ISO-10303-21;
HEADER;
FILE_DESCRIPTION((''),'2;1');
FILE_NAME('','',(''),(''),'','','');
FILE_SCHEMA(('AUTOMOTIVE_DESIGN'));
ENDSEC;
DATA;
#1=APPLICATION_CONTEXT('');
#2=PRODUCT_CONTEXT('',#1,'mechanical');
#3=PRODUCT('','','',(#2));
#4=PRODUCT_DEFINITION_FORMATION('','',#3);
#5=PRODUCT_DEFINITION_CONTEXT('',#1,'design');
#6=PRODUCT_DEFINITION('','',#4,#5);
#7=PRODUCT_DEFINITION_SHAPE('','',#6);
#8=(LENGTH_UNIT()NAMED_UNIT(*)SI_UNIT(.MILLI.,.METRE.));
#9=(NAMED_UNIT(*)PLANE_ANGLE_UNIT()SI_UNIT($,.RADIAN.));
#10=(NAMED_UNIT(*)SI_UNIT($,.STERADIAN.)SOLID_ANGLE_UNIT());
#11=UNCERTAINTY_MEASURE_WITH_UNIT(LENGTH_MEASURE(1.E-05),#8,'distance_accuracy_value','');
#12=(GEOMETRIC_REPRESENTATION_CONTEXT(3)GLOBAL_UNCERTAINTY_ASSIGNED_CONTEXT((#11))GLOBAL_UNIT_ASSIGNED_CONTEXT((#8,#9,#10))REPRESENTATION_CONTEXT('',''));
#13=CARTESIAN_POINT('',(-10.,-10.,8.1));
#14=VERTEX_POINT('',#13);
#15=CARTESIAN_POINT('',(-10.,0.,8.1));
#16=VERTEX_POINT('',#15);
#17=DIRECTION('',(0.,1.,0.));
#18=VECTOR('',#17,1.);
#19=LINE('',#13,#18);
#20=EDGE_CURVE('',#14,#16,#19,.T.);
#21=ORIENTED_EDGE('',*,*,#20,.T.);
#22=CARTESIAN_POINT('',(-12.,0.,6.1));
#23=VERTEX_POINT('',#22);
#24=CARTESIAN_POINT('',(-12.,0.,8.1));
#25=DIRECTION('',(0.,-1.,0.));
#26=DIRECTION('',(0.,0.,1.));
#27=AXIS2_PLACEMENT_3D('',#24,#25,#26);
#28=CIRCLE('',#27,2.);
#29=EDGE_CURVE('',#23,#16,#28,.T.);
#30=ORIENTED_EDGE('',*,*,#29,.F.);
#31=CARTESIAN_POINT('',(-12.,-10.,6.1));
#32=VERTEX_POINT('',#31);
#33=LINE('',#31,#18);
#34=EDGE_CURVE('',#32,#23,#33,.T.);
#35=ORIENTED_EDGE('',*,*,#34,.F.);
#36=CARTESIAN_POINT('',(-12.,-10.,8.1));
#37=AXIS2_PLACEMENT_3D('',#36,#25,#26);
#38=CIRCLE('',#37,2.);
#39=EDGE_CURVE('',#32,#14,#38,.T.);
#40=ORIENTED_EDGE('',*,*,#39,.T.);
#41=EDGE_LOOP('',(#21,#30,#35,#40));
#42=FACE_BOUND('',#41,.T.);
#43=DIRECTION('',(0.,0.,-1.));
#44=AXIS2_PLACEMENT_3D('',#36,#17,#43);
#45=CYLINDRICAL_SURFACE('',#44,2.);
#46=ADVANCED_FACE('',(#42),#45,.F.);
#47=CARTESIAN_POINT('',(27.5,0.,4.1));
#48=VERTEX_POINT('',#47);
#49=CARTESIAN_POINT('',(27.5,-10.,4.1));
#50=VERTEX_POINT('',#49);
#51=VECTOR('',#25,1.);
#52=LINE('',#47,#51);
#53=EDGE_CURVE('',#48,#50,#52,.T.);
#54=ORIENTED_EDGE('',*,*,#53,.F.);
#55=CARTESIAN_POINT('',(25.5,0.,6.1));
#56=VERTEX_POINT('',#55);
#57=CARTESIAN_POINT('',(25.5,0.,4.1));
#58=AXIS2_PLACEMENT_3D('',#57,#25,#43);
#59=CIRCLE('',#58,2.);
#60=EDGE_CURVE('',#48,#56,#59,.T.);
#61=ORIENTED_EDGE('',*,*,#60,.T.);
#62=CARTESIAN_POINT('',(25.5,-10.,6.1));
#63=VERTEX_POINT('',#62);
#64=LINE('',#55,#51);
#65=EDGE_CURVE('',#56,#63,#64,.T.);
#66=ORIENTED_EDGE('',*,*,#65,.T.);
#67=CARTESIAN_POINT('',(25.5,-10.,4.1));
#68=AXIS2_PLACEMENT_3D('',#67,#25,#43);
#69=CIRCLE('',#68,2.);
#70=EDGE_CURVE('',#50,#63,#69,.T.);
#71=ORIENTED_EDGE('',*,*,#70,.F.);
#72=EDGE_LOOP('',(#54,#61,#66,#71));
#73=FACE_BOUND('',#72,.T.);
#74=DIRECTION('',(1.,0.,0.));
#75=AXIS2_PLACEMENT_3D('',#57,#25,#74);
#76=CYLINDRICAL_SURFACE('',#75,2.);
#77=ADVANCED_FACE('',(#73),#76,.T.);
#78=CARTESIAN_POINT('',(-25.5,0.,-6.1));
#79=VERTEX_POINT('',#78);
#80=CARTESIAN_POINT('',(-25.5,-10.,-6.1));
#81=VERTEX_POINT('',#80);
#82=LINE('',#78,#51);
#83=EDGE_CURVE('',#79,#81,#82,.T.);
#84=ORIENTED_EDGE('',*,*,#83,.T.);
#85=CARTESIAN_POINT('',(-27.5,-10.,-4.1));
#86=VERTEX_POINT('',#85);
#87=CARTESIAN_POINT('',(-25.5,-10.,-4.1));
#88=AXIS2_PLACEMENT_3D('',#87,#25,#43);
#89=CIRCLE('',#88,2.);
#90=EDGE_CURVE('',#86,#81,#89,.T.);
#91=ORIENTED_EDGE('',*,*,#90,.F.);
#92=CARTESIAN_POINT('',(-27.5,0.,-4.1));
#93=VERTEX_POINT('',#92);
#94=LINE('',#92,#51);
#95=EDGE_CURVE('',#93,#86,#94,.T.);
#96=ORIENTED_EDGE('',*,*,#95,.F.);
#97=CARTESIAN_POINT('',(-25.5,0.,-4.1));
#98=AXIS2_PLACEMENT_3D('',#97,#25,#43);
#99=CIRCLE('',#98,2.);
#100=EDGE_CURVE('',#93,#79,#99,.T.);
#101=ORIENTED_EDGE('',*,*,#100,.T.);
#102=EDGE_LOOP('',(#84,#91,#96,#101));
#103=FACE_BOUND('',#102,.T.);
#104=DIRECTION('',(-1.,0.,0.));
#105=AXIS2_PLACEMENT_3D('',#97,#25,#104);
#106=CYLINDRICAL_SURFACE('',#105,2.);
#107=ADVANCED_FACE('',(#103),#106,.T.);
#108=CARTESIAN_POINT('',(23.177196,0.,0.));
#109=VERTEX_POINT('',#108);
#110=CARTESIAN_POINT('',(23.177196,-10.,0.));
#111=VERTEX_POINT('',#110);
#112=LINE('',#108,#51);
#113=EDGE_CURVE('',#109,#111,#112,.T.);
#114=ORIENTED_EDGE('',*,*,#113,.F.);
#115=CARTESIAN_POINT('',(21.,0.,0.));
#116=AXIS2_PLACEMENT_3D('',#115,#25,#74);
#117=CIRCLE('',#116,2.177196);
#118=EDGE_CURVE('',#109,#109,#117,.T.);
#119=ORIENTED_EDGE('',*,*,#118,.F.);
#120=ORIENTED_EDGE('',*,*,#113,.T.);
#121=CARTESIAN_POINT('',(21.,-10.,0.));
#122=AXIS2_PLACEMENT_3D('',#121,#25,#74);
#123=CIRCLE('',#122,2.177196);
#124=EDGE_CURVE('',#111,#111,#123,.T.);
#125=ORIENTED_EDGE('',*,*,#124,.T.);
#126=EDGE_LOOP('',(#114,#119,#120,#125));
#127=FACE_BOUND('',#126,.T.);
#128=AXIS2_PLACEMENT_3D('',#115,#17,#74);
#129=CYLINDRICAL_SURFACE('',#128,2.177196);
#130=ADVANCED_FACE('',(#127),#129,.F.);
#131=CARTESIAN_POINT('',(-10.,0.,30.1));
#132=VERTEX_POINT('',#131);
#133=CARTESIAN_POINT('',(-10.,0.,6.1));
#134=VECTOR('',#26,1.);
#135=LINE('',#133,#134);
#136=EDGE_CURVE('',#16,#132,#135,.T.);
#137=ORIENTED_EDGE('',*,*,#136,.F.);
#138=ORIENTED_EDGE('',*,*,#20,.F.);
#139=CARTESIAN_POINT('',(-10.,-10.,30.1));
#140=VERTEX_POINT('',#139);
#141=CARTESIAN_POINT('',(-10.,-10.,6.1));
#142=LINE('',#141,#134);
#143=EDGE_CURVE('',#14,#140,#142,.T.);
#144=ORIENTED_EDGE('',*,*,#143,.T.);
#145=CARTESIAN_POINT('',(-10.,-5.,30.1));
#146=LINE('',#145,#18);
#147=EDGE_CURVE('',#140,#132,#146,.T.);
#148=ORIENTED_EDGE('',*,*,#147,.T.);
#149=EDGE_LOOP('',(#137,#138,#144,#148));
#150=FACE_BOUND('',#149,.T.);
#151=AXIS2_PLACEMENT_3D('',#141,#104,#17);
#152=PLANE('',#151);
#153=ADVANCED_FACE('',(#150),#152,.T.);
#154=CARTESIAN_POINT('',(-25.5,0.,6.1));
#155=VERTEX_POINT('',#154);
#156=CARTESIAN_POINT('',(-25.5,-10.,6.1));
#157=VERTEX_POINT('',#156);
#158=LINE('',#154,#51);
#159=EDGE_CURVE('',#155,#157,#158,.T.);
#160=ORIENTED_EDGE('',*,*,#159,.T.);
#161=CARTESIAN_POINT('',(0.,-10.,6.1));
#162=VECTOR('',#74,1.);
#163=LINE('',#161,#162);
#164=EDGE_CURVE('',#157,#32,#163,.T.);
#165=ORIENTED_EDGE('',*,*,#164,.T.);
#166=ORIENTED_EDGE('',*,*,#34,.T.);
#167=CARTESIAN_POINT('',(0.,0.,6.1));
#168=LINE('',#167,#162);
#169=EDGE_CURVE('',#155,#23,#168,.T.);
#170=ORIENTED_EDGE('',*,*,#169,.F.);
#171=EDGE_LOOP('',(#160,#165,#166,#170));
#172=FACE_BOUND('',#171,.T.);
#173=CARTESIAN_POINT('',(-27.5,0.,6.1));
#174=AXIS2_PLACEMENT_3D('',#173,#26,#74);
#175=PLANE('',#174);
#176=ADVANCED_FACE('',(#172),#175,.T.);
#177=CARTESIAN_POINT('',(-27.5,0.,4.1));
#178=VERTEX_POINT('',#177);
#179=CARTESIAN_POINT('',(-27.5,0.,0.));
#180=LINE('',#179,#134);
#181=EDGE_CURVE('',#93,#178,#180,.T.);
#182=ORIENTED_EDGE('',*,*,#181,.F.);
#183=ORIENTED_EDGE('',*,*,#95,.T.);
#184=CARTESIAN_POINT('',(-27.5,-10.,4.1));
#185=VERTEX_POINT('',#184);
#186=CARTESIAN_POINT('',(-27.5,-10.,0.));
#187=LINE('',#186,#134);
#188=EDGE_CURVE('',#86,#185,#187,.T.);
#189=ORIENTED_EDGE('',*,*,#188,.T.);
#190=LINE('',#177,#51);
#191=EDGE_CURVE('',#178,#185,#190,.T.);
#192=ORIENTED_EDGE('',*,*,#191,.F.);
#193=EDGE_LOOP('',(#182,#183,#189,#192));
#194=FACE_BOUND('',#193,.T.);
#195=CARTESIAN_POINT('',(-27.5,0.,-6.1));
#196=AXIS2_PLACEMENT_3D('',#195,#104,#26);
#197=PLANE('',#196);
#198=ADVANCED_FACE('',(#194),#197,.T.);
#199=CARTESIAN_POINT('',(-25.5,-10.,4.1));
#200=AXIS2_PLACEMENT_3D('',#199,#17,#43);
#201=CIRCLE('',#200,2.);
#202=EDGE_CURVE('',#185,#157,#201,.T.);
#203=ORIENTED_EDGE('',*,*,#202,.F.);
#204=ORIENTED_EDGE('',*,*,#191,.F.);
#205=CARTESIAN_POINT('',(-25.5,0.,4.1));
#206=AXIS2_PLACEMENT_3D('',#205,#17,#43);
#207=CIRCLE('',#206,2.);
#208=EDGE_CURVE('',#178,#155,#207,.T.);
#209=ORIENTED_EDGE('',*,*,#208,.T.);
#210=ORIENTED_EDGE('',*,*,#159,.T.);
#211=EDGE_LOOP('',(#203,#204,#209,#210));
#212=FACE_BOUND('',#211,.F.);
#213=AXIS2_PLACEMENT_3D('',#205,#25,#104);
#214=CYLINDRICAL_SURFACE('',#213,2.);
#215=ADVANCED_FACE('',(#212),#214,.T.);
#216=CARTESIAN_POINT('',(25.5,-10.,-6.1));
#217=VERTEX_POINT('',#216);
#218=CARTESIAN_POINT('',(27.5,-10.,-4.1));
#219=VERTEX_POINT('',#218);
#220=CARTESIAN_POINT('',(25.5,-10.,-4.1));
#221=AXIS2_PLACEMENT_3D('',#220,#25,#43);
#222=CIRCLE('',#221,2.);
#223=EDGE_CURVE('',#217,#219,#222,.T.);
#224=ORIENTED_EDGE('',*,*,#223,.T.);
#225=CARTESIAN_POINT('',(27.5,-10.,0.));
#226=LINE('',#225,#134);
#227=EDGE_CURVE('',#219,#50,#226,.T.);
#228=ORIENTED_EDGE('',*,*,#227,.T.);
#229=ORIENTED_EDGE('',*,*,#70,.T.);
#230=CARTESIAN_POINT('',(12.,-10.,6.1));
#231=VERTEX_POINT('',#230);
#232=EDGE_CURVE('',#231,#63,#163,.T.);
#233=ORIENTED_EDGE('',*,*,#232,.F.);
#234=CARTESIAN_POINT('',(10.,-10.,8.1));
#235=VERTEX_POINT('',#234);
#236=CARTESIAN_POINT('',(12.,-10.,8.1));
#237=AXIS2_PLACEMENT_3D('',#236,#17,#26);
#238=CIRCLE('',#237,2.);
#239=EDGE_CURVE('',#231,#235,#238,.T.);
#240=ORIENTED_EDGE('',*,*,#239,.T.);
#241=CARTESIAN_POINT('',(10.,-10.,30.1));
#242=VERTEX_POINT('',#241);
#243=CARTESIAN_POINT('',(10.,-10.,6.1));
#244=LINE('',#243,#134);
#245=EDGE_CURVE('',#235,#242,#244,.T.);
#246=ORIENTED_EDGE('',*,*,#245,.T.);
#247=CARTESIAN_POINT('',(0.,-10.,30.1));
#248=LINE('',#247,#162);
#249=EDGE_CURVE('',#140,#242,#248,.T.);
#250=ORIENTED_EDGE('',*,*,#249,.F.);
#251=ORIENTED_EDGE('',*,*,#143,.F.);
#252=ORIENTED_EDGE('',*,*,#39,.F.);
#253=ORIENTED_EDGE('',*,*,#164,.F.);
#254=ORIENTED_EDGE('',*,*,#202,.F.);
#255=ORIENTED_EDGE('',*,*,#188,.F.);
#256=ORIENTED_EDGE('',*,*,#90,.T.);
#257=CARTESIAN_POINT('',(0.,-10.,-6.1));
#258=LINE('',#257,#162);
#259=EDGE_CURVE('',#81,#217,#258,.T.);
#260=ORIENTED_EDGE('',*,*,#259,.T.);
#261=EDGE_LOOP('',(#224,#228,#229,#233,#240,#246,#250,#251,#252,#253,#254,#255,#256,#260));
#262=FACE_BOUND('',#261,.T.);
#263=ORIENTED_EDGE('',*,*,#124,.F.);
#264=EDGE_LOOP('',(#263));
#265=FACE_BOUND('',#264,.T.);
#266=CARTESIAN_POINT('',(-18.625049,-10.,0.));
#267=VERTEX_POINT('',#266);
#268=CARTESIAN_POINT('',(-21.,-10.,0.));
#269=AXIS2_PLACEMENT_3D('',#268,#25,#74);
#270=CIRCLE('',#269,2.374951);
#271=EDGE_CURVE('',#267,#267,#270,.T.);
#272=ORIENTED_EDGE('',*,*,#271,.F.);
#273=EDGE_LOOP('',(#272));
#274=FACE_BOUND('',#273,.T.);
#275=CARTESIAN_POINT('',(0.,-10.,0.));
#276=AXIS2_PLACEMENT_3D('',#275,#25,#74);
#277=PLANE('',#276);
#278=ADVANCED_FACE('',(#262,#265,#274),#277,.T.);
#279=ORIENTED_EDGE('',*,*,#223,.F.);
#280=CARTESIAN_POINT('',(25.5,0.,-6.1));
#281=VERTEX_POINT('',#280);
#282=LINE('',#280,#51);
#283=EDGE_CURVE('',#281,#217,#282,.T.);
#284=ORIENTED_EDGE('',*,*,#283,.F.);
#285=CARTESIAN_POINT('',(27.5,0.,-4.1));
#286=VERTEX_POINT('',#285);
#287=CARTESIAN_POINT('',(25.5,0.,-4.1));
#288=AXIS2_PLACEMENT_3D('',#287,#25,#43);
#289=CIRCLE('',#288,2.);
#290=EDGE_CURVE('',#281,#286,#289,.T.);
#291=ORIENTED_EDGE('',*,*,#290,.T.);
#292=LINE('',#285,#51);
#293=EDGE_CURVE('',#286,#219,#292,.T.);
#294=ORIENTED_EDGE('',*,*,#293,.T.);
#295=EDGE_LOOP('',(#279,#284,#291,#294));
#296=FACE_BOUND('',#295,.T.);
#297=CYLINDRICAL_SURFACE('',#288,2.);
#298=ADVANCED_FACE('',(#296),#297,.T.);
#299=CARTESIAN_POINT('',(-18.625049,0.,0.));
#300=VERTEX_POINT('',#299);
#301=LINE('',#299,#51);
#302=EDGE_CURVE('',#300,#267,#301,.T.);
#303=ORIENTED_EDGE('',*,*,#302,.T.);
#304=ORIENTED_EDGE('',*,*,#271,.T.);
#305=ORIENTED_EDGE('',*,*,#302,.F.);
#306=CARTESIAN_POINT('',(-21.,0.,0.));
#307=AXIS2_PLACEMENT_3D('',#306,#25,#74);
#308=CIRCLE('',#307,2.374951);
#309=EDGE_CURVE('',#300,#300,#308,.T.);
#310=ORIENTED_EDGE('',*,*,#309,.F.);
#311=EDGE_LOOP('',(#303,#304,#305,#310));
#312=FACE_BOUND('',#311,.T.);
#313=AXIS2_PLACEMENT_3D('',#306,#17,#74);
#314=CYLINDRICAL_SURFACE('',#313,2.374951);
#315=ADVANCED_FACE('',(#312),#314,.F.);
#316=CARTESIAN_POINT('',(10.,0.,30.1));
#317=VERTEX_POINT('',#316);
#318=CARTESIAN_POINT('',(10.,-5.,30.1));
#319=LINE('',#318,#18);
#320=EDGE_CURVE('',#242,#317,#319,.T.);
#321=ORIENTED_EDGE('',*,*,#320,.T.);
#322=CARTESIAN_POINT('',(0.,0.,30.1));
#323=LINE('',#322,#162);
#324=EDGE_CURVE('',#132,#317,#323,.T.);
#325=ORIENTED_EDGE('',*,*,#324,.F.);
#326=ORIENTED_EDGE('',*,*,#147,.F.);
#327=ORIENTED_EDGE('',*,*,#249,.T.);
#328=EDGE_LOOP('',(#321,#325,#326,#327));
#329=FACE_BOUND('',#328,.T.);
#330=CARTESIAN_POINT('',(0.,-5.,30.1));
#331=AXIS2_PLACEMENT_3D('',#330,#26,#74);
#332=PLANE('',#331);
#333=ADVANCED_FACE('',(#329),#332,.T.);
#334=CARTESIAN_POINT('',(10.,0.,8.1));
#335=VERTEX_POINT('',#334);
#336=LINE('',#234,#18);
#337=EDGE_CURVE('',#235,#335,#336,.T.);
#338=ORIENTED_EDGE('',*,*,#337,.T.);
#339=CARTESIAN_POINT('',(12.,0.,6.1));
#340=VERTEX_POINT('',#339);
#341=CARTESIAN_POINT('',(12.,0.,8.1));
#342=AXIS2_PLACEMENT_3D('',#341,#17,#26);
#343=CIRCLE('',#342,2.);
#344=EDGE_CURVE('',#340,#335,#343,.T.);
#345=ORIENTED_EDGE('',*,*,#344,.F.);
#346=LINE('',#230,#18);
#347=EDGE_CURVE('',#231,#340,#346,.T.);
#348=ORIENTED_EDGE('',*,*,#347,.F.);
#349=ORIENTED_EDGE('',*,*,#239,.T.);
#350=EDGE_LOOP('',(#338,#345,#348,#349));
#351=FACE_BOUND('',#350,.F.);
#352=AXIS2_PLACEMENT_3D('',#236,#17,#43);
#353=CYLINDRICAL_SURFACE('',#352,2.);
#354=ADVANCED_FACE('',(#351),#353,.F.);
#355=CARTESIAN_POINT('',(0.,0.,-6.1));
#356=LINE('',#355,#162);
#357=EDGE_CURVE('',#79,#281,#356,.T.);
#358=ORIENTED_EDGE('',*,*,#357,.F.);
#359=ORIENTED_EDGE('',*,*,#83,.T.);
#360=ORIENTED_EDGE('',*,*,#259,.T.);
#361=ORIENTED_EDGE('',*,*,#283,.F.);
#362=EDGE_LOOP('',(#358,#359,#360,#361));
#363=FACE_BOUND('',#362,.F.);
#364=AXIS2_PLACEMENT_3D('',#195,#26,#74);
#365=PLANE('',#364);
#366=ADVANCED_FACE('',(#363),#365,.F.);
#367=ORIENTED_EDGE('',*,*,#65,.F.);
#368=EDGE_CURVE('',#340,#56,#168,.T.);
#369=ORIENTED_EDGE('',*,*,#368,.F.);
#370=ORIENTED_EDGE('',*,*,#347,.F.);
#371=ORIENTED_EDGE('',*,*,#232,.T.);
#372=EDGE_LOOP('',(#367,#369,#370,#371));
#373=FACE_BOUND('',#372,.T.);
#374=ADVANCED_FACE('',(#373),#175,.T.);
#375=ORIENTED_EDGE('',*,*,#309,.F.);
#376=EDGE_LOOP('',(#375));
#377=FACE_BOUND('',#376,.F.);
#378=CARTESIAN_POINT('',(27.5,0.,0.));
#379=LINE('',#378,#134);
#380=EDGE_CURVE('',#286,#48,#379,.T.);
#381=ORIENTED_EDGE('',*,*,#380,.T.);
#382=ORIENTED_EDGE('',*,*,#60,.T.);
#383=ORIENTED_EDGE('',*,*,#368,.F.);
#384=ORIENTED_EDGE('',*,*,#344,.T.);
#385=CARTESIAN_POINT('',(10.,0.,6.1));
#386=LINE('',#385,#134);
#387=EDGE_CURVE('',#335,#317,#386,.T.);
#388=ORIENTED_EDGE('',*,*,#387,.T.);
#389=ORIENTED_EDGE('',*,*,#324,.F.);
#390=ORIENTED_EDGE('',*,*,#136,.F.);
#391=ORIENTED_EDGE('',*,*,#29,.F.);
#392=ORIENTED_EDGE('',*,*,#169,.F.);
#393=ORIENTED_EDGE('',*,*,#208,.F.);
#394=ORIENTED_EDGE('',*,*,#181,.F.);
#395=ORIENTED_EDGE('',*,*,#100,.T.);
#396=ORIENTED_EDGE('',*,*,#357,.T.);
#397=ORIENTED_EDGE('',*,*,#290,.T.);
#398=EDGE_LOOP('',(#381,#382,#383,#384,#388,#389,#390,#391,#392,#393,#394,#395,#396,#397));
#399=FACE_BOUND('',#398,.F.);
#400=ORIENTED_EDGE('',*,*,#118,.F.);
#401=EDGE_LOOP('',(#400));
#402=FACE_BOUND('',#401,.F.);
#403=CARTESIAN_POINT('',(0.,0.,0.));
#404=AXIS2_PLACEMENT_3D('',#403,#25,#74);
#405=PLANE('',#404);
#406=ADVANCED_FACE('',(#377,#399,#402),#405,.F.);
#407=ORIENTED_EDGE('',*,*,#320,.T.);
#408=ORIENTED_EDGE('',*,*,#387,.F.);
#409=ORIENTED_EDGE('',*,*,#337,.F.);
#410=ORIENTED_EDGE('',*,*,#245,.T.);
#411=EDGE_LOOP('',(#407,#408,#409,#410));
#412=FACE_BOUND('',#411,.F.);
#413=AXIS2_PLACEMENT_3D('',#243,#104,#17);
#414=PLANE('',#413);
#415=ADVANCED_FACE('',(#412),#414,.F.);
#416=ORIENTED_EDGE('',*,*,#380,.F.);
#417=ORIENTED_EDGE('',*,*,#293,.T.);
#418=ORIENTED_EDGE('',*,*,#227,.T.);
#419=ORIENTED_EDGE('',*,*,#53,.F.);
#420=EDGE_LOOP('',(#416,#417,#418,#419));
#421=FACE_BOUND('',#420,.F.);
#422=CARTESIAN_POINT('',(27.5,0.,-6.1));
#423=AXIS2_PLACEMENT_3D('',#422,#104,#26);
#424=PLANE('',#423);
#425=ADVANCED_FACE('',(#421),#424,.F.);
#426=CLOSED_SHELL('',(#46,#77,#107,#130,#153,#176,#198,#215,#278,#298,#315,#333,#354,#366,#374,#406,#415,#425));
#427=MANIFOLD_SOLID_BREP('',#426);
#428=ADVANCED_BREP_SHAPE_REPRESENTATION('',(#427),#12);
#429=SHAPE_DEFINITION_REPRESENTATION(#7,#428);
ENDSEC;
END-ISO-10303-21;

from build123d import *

# Parameters (mm, degrees)
F0_W     = 55
F0_H     = 12.2
F0_R     = 2.374951393
F0_R_2   = 2.1771962512
F1_DEPTH = 10
F2_W     = 20
F2_H     = 10
F3_DEPTH = 24
F4_R     = 2


with BuildPart() as f1:
    # F0 (on Front) → F1 (new body)
    with BuildSketch(Plane.XZ):
        Rectangle(F0_W, F0_H)
        with Locations((-21, 0)):
            Circle(F0_R, mode=Mode.SUBTRACT)
        with Locations((21, 0)):
            Circle(F0_R_2, mode=Mode.SUBTRACT)
    extrude(amount=F1_DEPTH)

    # F2 (on face) → F3 (join)
    with BuildSketch(Plane.XY.offset(6.1)):
        with Locations((0, -5)):
            Rectangle(F2_W, F2_H)
    extrude(amount=F3_DEPTH)

    # F4
    f4_edges = [f1.edges().sort_by_distance(p)[0] for p in [
        (10, -5, 6.1),
        (27.5, -5, 6.1),
        (27.5, -5, -6.1),
        (-10, -5, 6.1),
        (-27.5, -5, 6.1),
        (-27.5, -5, -6.1),
    ]]
    fillet(f4_edges, radius=F4_R)


solid = f1.part
